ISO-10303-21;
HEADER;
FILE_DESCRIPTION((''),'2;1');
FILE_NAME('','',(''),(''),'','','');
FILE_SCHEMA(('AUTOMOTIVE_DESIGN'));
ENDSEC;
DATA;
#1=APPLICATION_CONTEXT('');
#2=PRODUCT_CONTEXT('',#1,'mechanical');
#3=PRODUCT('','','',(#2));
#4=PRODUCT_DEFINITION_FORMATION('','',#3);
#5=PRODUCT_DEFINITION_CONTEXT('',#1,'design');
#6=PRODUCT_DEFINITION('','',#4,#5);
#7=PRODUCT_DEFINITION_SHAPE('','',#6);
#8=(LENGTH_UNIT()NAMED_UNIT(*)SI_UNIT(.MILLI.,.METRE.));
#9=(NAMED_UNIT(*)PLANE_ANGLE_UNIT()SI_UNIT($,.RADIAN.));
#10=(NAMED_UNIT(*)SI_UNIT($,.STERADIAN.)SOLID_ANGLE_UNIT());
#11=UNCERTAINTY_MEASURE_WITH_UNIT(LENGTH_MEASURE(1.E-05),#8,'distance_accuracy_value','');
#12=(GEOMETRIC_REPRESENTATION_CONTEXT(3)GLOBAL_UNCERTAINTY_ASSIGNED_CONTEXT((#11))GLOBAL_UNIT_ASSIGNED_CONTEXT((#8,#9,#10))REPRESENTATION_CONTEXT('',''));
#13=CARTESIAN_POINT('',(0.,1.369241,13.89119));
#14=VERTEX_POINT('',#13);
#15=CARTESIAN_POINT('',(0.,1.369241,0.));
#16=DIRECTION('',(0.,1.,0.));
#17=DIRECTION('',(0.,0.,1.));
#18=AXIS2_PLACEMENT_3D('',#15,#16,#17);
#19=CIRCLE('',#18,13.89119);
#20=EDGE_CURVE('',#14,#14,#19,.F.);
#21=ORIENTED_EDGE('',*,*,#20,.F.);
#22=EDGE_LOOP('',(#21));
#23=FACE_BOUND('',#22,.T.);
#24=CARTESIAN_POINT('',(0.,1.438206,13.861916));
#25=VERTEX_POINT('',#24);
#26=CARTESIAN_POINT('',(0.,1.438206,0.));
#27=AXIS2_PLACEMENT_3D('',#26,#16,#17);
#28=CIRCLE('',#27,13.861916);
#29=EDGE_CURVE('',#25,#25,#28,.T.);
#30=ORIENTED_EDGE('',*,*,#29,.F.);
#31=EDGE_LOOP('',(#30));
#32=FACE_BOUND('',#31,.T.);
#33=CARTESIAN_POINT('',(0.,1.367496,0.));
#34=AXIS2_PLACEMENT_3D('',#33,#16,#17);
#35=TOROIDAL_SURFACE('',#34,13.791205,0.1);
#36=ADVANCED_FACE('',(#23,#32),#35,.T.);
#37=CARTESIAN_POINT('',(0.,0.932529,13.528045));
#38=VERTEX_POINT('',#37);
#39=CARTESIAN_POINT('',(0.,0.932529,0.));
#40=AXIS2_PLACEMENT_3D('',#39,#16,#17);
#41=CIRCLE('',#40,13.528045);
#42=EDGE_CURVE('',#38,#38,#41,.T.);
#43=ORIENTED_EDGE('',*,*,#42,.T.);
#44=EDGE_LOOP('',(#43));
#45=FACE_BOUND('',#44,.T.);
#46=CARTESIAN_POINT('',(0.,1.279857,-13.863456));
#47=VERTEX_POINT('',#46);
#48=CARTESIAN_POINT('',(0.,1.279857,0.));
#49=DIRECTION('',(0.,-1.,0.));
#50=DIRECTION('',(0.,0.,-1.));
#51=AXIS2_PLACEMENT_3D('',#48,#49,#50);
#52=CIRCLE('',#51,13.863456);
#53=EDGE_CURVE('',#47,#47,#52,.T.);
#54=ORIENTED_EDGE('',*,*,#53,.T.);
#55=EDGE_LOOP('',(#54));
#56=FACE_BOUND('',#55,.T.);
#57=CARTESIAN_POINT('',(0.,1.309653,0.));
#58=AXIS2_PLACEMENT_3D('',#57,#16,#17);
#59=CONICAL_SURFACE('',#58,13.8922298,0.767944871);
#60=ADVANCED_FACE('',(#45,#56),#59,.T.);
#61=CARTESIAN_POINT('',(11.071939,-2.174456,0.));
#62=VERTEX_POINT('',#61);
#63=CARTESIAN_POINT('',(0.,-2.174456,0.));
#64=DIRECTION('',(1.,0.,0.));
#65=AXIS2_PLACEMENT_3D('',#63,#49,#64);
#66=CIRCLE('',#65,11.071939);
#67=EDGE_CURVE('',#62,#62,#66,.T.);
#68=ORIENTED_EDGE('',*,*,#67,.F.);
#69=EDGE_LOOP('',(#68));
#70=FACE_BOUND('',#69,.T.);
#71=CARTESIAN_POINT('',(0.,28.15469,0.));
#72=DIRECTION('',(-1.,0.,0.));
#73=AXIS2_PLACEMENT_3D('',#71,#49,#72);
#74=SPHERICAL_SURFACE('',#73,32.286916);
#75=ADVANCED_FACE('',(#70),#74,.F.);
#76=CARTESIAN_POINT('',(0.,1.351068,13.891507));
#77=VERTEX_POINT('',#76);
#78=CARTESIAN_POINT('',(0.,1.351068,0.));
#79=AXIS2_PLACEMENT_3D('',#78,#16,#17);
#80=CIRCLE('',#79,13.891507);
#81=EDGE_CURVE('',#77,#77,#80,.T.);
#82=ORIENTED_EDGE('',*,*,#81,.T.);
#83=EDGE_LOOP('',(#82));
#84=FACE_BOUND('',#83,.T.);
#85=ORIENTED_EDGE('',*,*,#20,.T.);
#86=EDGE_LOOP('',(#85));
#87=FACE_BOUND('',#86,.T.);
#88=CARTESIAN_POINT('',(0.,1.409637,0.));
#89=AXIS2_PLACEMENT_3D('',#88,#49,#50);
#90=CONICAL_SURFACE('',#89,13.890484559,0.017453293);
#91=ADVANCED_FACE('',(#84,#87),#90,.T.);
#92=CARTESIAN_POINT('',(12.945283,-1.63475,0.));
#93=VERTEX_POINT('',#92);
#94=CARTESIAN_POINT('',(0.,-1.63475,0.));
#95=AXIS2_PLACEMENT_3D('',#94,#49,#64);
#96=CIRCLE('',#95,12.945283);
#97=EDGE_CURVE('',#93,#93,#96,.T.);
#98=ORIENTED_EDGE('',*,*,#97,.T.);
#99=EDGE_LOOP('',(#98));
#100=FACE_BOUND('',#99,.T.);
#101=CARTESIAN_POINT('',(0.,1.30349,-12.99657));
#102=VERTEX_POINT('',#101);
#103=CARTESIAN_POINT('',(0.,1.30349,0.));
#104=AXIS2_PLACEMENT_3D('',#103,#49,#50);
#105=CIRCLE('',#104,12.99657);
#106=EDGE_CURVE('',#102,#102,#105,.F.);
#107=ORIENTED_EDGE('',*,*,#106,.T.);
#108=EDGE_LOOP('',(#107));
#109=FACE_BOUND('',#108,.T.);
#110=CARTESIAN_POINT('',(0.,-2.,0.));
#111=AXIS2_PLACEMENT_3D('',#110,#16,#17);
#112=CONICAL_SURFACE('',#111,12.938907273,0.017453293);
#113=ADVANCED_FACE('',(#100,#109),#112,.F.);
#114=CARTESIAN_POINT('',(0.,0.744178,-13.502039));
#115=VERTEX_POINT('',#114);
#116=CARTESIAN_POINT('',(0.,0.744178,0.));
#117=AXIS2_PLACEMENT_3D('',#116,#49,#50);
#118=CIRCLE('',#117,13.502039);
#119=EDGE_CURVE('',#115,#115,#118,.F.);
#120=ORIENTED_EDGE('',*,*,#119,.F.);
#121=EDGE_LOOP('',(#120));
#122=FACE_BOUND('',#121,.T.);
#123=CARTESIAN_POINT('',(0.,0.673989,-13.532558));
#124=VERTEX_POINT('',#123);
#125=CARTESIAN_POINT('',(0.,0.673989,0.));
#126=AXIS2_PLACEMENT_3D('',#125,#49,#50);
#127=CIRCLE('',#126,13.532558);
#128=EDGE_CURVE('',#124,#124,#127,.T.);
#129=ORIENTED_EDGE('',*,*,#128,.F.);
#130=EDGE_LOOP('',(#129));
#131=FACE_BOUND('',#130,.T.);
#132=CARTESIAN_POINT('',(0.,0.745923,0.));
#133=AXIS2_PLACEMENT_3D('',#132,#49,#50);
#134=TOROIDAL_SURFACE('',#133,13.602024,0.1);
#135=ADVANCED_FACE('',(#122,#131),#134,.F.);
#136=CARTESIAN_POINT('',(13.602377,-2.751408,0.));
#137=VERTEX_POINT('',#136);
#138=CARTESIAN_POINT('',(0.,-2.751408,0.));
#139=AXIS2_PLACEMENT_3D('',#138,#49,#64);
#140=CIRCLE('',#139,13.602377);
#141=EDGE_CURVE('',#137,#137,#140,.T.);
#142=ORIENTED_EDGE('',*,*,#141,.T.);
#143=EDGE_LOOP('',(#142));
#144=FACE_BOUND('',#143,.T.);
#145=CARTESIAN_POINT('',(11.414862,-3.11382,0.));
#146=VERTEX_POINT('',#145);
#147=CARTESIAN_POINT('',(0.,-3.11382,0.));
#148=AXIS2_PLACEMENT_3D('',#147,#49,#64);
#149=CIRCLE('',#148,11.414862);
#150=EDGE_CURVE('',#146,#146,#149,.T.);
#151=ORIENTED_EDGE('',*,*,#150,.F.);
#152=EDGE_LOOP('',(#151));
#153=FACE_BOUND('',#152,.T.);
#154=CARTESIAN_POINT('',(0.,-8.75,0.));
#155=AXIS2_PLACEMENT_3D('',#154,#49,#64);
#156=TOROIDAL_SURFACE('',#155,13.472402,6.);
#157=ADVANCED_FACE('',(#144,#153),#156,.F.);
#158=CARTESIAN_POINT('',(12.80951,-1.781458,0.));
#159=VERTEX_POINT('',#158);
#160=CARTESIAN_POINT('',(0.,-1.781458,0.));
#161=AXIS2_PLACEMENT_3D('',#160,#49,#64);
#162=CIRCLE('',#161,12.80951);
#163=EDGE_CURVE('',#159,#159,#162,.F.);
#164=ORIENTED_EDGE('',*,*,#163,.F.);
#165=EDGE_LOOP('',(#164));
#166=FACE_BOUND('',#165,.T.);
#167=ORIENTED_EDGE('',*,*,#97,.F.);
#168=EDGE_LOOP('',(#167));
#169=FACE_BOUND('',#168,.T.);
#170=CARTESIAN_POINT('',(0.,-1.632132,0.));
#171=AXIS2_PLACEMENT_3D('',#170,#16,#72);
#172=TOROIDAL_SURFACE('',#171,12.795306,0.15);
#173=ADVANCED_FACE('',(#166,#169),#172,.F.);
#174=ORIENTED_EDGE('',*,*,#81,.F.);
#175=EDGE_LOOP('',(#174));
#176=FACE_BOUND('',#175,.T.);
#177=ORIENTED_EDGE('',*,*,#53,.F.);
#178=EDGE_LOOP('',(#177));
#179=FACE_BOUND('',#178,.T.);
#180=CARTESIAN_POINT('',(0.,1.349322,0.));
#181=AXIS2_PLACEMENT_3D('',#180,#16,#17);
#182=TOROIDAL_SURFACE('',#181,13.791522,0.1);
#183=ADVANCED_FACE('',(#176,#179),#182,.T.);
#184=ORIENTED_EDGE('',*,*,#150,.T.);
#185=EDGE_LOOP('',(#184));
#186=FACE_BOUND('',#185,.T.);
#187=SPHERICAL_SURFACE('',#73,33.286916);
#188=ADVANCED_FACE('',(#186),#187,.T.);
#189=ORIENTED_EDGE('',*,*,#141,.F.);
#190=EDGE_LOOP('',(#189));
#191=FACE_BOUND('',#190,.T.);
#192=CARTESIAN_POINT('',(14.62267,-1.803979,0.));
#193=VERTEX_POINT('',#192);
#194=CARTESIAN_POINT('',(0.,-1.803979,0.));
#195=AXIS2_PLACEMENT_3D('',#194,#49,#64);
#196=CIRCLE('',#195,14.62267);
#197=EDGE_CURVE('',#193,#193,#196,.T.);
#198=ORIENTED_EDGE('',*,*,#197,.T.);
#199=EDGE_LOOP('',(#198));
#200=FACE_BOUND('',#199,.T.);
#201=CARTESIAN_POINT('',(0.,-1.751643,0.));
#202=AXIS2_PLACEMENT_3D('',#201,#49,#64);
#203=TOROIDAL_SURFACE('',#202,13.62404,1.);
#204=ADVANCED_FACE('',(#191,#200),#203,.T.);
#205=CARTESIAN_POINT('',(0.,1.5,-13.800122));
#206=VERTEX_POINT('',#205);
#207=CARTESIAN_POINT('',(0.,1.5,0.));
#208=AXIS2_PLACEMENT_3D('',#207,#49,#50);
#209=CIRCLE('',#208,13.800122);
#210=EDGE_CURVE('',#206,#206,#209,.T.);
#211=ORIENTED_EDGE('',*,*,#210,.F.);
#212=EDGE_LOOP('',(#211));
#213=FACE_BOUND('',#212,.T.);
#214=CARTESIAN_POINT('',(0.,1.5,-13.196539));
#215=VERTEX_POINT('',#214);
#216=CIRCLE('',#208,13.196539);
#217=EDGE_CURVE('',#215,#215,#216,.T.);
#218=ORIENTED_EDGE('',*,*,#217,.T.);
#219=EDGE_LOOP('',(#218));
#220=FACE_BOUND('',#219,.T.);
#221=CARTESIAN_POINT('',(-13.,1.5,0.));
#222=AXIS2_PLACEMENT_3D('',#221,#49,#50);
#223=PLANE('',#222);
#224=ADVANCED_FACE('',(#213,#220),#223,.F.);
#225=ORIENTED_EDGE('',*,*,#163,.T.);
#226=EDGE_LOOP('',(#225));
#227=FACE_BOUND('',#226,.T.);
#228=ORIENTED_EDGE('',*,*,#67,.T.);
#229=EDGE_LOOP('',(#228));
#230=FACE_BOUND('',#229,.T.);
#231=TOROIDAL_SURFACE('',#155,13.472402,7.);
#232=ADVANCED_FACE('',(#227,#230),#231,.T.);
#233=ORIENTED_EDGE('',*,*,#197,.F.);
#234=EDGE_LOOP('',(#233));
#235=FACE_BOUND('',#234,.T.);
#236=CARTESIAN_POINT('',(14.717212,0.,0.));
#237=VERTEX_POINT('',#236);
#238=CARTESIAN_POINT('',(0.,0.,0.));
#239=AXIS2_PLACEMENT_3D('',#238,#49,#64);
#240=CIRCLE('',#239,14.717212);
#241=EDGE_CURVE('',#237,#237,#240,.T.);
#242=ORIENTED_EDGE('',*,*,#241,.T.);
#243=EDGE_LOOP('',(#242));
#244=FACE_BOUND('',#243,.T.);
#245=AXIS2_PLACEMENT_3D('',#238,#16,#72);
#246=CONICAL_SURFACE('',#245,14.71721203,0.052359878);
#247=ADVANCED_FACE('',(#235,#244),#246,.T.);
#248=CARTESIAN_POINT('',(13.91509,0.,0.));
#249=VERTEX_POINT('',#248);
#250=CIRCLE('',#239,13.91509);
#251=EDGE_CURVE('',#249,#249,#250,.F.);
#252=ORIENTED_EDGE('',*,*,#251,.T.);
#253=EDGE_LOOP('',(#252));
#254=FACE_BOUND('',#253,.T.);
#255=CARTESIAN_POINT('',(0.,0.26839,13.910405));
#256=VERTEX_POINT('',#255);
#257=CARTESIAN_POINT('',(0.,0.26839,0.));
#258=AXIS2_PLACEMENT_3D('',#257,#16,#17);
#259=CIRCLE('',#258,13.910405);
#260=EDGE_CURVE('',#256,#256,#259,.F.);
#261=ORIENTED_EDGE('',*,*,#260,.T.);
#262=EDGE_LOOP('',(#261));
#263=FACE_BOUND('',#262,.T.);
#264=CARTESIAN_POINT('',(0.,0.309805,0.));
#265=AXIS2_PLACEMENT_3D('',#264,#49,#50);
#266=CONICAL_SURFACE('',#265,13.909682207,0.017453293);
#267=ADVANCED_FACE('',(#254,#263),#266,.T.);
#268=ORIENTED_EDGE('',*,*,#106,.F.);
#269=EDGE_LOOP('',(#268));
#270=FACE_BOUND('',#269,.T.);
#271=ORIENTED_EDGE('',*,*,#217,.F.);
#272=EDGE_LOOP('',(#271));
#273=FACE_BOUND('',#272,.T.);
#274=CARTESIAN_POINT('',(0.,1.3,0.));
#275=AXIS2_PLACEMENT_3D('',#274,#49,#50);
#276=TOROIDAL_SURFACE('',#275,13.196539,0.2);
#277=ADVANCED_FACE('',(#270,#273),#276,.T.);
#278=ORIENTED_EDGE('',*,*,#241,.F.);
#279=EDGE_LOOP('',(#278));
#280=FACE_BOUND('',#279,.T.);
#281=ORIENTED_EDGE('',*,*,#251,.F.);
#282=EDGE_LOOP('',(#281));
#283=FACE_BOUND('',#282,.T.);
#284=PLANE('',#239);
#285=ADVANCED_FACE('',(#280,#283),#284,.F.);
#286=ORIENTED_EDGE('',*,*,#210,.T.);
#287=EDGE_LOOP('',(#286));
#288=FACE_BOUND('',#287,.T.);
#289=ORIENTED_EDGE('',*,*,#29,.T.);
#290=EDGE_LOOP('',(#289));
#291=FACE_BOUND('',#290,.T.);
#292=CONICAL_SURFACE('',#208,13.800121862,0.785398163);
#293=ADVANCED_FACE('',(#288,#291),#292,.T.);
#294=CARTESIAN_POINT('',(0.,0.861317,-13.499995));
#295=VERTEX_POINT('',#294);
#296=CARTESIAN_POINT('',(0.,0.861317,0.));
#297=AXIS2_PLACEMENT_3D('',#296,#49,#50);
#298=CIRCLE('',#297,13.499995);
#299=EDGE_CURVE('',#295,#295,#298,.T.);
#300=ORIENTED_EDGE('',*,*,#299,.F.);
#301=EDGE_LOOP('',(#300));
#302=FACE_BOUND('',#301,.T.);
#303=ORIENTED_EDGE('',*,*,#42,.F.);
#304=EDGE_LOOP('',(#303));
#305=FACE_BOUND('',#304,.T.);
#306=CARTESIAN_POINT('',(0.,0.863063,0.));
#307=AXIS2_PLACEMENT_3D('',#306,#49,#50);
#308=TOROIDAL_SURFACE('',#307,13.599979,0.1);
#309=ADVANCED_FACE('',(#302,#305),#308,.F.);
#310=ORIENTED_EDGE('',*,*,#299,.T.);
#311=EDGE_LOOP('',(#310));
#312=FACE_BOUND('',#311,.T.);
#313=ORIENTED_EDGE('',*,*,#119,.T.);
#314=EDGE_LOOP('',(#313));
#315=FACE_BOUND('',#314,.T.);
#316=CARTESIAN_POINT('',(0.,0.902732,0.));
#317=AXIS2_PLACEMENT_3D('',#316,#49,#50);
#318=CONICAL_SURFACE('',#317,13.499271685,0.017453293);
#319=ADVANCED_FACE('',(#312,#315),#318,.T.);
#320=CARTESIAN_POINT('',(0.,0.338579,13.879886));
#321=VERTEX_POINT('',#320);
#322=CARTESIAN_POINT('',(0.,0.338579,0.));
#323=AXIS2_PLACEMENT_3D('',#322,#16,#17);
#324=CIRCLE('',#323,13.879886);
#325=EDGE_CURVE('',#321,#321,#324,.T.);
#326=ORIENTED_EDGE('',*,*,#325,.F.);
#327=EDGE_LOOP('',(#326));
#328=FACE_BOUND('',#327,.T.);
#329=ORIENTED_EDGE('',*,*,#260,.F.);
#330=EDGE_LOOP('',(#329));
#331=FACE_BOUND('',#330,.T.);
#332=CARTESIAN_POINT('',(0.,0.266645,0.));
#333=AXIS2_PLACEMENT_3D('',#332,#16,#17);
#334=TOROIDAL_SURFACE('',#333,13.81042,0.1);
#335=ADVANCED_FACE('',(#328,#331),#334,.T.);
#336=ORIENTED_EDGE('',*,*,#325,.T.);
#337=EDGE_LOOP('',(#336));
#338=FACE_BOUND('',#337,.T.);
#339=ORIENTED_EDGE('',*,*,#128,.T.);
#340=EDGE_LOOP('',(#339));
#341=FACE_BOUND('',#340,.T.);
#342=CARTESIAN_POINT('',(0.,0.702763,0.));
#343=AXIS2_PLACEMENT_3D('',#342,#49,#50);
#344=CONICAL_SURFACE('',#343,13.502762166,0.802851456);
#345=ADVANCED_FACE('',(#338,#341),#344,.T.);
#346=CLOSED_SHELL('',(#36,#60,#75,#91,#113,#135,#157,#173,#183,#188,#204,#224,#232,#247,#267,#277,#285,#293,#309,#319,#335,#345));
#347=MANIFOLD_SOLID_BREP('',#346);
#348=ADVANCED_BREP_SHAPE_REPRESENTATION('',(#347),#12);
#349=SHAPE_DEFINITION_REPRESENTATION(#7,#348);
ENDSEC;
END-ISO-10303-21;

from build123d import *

# Parameters (mm, degrees)
SHELL1_T  = -1
FILLET2_R = 0.15
FILLET3_R = 0.2
FILLET4_R = 0.1


with BuildPart() as part:
    # Sketch3 → Revolve1 (revolve)
    with BuildSketch(Plane.XY, mode=Mode.PRIVATE) as revolve1_sk:
        with BuildLine():
            Line((0, 0), (-14.71721203, 0))
            Line((-14.71721203, 0), (-14.622669519, -1.803978578))
            ThreePointArc((-14.622669519, -1.803978578), (-14.304496998, -2.48443062), (-13.602377467, -2.751407959))
            ThreePointArc((-13.602377467, -2.751407959), (-12.49173295, -2.830685215), (-11.414862037, -3.113819746))
            ThreePointArc((-11.414862037, -3.113819746), (-5.795969269, -4.623740658), (0, -5.132225985))
            Line((0, -5.132225985), (0, 0))
        make_face()
    revolve(revolve1_sk.sketch.rotate(Axis((0, -5.132225985, 0), (0, 1, 0)), 180), axis=Axis((0, -5.132225985, 0), (0, 1, 0)))

    # Shell1
    shell1_openings = [part.faces().sort_by_distance(p)[0] for p in [
        (0, 0, 0),
    ]]
    offset(amount=SHELL1_T, openings=shell1_openings, kind=Kind.INTERSECTION)

    # Fillet1: read off the stored shape, not the designer's step
    # Fillet1 outline → Fillet1 (revolve)
    with BuildSketch(Plane.XY):
        with BuildLine():
            Line((13.648593596, -1.756499566), (13.648593596, -1.283131799))
            ThreePointArc((13.648593596, -1.283131799), (13.501190879, -1.612150966), (13.170820397, -1.756499566))
            Line((13.170820397, -1.756499566), (13.648593596, -1.756499566))
        make_face()
    revolve(axis=Axis((0, 0, 0), (0, 1, 0)))

    # Sketch4 → Revolve2 (revolve)
    with BuildSketch(Plane.XY, mode=Mode.PRIVATE) as revolve2_sk:
        Polygon((-13, 1.5), (-12.938907273, -2), (-13.95, -2), (-13.909682207, 0.309804838), (-13.502762166, 0.702762954), (-13.499271685, 0.902732493), (-13.8922298, 1.309652533), (-13.890484559, 1.409637303), (-13.800121862, 1.5), align=None)
    revolve(revolve2_sk.sketch.rotate(Axis((0, 0, 0), (0, 1, 0)), 270), axis=Axis((0, 0, 0), (0, 1, 0)))

    # Fillet2
    fillet2_edges = [part.edges().sort_by_distance(p)[0] for p in [
        (-9.152027206, -1.770053761, 9.152027206),
        (9.152027207, -1.770053761, -9.152027207),
    ]]
    fillet(fillet2_edges, radius=FILLET2_R)

    # Fillet3
    fillet3_edges = [part.edges().sort_by_distance(p)[0] for p in [
        (0, 1.5, 13),
    ]]
    fillet(fillet3_edges, radius=FILLET3_R)

    # Fillet4
    fillet4_edges = [part.edges().sort_by_distance(p)[0] for p in [
        (0, 0.309804838, 13.909682207),
        (0, 1.409637303, 13.890484559),
        (0, 1.309652533, 13.8922298),
        (0, 0.902732493, 13.499271685),
        (0, 0.702762954, 13.502762166),
    ]]
    fillet(fillet4_edges, radius=FILLET4_R)


solid = part.part
